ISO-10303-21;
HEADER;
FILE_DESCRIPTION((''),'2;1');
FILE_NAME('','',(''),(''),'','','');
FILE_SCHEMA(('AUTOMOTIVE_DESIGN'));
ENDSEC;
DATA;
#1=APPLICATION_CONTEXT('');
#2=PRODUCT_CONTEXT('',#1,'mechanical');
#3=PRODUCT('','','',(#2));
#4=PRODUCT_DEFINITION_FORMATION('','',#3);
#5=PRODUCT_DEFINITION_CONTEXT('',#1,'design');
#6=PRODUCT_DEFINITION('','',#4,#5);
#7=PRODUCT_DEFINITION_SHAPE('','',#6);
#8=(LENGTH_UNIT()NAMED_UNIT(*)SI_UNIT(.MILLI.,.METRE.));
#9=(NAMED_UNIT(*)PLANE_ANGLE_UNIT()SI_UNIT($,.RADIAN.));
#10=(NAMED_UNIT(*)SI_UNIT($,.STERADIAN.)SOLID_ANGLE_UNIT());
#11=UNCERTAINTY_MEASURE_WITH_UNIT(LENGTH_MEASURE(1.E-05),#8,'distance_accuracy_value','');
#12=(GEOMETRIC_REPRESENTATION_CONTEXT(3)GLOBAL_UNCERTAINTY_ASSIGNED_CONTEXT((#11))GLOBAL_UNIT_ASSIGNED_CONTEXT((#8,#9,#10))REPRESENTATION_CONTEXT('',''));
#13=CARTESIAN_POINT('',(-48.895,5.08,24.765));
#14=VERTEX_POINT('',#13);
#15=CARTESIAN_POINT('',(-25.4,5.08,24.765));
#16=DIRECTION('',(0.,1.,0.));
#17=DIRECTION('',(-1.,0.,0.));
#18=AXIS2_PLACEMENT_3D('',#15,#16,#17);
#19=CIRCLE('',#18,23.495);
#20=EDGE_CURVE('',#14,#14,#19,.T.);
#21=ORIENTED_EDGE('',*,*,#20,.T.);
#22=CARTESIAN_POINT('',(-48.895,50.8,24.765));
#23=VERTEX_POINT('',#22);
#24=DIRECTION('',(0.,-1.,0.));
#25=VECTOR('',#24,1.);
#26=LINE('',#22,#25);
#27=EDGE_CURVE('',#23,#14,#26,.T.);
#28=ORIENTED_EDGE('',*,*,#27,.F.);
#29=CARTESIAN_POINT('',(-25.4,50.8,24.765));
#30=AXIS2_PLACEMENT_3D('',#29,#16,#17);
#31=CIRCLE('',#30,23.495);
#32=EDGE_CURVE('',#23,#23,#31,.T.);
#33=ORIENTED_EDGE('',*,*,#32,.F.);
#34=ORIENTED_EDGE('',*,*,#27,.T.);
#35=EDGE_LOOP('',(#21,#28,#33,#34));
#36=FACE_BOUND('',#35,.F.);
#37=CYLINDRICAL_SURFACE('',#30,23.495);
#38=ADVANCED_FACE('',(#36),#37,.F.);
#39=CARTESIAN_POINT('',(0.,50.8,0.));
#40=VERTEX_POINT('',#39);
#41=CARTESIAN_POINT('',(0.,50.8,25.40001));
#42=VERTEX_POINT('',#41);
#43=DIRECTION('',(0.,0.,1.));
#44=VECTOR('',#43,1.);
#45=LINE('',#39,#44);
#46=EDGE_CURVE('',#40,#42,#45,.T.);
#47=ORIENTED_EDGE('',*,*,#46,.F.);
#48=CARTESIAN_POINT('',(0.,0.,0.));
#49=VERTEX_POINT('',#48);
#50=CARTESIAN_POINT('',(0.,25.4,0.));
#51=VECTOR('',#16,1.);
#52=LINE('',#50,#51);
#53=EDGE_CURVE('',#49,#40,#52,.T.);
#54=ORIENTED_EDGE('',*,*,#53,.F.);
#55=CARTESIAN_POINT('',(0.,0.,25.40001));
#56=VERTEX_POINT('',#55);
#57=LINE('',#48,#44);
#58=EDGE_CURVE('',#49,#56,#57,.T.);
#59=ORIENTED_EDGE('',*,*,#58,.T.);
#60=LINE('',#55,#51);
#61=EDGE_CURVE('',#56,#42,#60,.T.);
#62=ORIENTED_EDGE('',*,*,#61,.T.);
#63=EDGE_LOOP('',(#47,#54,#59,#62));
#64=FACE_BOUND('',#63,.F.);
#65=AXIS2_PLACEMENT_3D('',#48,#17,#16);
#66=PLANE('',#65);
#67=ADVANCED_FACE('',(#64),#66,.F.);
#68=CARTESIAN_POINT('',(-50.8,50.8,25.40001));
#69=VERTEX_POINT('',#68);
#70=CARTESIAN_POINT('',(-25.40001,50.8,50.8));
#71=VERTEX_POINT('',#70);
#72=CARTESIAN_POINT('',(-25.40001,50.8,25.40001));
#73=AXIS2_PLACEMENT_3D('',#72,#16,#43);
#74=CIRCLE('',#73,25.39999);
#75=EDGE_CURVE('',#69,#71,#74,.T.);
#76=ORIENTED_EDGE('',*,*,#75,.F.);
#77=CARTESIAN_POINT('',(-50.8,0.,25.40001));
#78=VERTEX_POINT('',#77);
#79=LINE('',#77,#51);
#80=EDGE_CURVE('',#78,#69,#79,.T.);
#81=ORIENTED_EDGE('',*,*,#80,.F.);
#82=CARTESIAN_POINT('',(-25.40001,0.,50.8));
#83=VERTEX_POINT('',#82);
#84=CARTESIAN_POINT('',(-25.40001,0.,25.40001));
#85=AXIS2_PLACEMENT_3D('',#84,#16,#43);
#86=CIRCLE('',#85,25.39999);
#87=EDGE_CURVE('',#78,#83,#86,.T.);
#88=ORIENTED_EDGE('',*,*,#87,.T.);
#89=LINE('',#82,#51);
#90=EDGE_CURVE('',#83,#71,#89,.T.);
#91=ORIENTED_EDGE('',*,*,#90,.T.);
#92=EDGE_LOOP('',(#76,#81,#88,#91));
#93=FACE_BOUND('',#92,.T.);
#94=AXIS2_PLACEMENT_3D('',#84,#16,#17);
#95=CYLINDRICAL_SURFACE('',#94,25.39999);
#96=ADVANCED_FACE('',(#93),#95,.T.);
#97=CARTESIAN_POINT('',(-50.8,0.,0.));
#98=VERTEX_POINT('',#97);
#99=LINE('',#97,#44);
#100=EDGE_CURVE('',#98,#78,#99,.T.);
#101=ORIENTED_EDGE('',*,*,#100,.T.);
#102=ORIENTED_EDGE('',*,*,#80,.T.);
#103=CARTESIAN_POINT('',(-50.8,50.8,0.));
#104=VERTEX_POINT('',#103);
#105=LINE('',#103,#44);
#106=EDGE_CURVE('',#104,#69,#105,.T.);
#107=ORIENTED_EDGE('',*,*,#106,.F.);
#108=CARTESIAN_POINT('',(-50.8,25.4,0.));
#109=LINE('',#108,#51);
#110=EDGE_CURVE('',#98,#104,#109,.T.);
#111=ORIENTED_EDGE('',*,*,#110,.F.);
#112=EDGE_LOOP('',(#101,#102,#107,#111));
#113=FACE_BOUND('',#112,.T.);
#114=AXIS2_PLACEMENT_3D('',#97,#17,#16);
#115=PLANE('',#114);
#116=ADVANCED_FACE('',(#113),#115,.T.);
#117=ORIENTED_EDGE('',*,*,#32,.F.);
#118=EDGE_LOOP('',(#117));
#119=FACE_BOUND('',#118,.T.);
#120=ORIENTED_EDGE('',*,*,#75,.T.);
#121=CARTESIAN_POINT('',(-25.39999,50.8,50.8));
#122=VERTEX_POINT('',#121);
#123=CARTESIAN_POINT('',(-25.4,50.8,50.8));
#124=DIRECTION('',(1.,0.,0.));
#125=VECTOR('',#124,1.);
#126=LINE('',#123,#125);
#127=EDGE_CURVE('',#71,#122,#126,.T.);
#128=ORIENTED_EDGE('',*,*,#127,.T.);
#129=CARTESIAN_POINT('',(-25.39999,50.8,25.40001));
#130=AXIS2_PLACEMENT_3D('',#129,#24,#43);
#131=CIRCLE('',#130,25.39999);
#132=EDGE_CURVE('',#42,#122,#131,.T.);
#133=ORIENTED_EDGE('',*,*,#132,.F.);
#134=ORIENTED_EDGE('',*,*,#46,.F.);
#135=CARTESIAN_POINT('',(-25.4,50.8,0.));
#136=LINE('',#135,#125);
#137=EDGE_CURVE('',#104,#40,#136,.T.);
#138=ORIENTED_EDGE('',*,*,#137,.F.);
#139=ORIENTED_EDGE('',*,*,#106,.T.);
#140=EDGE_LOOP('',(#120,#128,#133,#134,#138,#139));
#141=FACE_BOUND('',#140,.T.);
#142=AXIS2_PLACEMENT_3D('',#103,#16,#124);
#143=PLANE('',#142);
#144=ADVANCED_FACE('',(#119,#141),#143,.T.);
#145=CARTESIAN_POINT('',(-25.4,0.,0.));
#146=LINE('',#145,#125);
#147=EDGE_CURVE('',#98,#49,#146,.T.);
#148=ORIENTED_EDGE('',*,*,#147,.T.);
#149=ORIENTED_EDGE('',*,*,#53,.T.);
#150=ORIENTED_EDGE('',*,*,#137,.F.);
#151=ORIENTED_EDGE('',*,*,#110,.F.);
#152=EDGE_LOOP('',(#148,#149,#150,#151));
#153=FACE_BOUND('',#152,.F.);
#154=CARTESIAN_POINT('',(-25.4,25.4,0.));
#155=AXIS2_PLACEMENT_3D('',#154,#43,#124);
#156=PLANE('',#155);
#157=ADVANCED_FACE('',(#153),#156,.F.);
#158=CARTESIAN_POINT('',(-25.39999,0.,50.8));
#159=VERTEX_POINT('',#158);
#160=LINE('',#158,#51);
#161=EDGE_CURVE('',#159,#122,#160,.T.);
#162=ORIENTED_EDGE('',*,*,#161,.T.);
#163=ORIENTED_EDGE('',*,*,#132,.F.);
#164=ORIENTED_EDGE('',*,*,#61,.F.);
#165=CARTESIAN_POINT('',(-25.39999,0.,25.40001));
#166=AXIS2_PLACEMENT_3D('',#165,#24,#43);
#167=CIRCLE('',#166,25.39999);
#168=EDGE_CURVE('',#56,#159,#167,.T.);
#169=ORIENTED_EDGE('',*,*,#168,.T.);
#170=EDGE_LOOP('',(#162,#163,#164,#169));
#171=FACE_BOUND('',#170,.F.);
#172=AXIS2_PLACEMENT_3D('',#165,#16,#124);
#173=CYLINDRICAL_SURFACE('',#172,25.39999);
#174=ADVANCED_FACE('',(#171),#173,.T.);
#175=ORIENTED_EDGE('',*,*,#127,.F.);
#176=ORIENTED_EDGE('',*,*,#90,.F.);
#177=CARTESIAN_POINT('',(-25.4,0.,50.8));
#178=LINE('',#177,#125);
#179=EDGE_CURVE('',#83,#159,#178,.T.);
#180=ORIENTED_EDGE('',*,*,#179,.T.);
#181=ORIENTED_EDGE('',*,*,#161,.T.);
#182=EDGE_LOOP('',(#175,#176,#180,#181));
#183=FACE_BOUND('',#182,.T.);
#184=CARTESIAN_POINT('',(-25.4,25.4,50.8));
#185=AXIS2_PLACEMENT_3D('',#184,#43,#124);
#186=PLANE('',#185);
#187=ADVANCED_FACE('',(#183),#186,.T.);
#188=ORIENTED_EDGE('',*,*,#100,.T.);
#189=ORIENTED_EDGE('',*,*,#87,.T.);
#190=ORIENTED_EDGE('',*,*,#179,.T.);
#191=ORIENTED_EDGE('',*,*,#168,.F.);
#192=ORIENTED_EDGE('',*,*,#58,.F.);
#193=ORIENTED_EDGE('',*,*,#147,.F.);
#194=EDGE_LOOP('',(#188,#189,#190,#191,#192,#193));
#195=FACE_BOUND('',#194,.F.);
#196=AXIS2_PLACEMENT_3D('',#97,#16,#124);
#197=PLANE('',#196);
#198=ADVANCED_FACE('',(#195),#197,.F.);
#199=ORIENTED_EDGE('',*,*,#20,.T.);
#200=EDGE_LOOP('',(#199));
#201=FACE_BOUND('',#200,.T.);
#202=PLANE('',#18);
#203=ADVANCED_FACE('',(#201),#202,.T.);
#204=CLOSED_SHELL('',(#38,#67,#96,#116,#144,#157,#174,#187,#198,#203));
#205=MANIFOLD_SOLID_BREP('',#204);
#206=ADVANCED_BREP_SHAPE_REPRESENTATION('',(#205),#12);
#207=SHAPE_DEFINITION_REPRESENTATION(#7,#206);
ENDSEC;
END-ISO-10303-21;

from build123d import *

# Parameters (mm, degrees)
F0_W     = 50.8
F0_H     = 50.8
F1_DEPTH = 50.8
F3_R     = 25.39999
F2_R     = 23.495
F4_DEPTH = 45.72


# Not quite as in the source:
# - a fillet or chamfer is up to 0.001 mm smaller than in the source, because OpenCascade refuses the exact size


with BuildPart() as f1:
    # F0 (on Top) → F1 (new body)
    with BuildSketch(Plane.XY):
        with Locations((-25.4, 25.4)):
            Rectangle(F0_W, F0_H)
    extrude(amount=F1_DEPTH)

    # F3 (radius 25.4 in the source; OpenCascade refuses exactly that, so slightly less here)
    f3_edges = [f1.edges().sort_by_distance(p)[0] for p in [
        (0, 25.4, 50.8),
        (-50.8, 25.4, 50.8),
    ]]
    fillet(f3_edges, radius=F3_R)

    # F2 (on face) → F4 (cut)
    with BuildSketch(Plane(origin=(0, 50.8, 0), x_dir=(-1, 0, 0), z_dir=(0, 1, 0))):
        with Locations((25.4, 24.765)):
            Circle(F2_R)
    extrude(amount=-F4_DEPTH, mode=Mode.SUBTRACT)


solid = f1.part
